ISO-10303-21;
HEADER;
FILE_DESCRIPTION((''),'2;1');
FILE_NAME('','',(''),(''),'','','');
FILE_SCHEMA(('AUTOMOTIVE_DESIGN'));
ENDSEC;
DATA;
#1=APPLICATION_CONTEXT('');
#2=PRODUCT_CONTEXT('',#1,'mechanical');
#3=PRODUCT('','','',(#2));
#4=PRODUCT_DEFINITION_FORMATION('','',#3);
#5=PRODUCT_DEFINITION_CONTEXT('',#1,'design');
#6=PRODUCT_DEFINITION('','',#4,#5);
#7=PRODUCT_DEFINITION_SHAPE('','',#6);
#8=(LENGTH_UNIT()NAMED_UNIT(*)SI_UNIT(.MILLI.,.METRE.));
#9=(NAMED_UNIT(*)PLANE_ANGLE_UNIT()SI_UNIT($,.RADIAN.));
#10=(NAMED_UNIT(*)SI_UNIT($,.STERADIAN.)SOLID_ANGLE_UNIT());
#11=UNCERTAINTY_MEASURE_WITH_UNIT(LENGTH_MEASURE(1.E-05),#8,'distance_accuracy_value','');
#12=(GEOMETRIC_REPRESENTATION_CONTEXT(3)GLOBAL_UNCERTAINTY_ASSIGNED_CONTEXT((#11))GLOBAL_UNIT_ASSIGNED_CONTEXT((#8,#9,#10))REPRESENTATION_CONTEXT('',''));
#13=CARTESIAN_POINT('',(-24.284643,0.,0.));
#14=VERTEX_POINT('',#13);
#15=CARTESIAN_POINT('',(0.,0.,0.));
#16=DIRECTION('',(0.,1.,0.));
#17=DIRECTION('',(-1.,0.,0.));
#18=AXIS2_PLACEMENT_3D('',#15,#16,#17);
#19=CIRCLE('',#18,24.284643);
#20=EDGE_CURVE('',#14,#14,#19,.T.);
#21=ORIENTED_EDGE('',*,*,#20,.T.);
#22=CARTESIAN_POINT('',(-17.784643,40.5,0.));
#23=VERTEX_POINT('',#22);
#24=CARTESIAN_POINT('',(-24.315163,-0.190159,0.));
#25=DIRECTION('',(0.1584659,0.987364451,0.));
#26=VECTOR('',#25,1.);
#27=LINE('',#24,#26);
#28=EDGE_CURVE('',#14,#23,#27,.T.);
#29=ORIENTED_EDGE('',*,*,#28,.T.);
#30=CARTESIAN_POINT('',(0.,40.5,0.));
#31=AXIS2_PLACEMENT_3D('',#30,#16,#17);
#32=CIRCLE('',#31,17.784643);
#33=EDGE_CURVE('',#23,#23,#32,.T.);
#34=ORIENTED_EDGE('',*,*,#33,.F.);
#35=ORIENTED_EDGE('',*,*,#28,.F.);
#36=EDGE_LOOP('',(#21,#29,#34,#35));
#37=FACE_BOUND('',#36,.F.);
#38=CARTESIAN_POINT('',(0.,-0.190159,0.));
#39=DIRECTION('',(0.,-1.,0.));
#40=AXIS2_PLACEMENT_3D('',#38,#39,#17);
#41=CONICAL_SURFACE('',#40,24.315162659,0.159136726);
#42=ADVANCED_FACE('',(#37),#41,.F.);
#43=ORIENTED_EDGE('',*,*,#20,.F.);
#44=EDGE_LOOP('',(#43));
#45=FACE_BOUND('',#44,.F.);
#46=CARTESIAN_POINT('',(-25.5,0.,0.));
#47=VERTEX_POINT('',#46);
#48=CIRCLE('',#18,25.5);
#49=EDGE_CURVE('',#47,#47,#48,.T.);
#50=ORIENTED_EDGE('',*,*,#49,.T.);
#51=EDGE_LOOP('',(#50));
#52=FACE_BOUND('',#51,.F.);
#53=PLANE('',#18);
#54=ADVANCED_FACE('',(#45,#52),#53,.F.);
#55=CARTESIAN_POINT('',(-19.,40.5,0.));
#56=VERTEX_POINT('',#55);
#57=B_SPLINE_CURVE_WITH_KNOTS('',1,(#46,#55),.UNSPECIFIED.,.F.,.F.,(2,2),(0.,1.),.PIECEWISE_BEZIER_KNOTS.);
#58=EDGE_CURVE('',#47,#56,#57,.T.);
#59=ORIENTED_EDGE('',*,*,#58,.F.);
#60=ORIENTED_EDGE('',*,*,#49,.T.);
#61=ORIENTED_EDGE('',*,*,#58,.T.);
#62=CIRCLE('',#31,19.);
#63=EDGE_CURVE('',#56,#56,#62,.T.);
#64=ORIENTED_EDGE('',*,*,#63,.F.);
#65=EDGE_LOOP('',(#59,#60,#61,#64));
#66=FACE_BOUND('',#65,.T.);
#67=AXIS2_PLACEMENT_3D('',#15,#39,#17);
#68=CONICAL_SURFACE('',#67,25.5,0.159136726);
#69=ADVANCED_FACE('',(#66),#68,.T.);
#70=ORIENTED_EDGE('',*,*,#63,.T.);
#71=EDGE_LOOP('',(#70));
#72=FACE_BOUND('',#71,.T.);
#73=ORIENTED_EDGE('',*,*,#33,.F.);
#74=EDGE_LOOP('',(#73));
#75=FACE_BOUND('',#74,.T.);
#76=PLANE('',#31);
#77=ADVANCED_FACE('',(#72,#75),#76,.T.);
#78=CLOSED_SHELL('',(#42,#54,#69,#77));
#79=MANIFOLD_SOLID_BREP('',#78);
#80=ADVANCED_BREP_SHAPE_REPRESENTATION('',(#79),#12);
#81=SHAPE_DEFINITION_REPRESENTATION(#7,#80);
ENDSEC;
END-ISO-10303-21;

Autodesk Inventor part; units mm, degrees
ref_plane "YZ Plane" through (0, 0, 0) normal (1, 0, 0) x (0, 1, 0)
ref_plane "XY Plane" through (0, 0, 0) normal (0, 0, 1) x (1, 0, 0)
sketch "Szkic6" plane through (0, 0, 0) normal (0, 1, 0) x (-1, 0, 0)
  circle A0 centre (0, 0) radius 25.5
  dimension "d33" = 51
ref_plane "Płaszczyzna konstrukcyjna1" through (0, 40.5, 0) normal (0, 1, 0) x (-1, 0, 0)
sketch "Szkic7" plane through (0, 40.5, 0) normal (0, 1, 0) x (-1, 0, 0)
  circle A0 centre (0, 0) radius 19
  dimension "d35" = 38
loft "Wyciągnięcie złożone1" add profiles "Szkic6", "Szkic7"
shell "Skorupa1" thickness 1.2 removed faces 2 at (-4.7406, 40.5, -4.1998) at (4.5479, 0, -4.6843)
equation "\"d33\" = OD1"
equation "\"d35\" = OD2"
equation "\"d52\" = THK"
equation "\"SzerokośćGięciaPodcięcia\" = Grubość"
equation "\"RozmiarPodcięciaNarożnika\" = 4 * Grubość"
equation "\"PromieńPrzejścia\" = PromieńGięcia"
equation "\"Rozmiar_promienia_Jacobiego\" = PromieńGięcia"
equation "\"Wielk_odstępu\" = Grubość"
equation "\"d2\" = PromieńGięcia"
equation "\"d23\" = PromieńGięcia"
equation "\"OD1\" = 51"
equation "\"OD2\" = 38"
equation "\"L\" = 40.5"
equation "\"THK\" = 1.2"
equation "\"d34\" = L"
equation "\"Grubość\" = 1.5"
equation "\"PromieńGięcia\" = 3"
properties part number "Redukcja symetryczna Ø51x38x1,2 L=40,5" material "304"
